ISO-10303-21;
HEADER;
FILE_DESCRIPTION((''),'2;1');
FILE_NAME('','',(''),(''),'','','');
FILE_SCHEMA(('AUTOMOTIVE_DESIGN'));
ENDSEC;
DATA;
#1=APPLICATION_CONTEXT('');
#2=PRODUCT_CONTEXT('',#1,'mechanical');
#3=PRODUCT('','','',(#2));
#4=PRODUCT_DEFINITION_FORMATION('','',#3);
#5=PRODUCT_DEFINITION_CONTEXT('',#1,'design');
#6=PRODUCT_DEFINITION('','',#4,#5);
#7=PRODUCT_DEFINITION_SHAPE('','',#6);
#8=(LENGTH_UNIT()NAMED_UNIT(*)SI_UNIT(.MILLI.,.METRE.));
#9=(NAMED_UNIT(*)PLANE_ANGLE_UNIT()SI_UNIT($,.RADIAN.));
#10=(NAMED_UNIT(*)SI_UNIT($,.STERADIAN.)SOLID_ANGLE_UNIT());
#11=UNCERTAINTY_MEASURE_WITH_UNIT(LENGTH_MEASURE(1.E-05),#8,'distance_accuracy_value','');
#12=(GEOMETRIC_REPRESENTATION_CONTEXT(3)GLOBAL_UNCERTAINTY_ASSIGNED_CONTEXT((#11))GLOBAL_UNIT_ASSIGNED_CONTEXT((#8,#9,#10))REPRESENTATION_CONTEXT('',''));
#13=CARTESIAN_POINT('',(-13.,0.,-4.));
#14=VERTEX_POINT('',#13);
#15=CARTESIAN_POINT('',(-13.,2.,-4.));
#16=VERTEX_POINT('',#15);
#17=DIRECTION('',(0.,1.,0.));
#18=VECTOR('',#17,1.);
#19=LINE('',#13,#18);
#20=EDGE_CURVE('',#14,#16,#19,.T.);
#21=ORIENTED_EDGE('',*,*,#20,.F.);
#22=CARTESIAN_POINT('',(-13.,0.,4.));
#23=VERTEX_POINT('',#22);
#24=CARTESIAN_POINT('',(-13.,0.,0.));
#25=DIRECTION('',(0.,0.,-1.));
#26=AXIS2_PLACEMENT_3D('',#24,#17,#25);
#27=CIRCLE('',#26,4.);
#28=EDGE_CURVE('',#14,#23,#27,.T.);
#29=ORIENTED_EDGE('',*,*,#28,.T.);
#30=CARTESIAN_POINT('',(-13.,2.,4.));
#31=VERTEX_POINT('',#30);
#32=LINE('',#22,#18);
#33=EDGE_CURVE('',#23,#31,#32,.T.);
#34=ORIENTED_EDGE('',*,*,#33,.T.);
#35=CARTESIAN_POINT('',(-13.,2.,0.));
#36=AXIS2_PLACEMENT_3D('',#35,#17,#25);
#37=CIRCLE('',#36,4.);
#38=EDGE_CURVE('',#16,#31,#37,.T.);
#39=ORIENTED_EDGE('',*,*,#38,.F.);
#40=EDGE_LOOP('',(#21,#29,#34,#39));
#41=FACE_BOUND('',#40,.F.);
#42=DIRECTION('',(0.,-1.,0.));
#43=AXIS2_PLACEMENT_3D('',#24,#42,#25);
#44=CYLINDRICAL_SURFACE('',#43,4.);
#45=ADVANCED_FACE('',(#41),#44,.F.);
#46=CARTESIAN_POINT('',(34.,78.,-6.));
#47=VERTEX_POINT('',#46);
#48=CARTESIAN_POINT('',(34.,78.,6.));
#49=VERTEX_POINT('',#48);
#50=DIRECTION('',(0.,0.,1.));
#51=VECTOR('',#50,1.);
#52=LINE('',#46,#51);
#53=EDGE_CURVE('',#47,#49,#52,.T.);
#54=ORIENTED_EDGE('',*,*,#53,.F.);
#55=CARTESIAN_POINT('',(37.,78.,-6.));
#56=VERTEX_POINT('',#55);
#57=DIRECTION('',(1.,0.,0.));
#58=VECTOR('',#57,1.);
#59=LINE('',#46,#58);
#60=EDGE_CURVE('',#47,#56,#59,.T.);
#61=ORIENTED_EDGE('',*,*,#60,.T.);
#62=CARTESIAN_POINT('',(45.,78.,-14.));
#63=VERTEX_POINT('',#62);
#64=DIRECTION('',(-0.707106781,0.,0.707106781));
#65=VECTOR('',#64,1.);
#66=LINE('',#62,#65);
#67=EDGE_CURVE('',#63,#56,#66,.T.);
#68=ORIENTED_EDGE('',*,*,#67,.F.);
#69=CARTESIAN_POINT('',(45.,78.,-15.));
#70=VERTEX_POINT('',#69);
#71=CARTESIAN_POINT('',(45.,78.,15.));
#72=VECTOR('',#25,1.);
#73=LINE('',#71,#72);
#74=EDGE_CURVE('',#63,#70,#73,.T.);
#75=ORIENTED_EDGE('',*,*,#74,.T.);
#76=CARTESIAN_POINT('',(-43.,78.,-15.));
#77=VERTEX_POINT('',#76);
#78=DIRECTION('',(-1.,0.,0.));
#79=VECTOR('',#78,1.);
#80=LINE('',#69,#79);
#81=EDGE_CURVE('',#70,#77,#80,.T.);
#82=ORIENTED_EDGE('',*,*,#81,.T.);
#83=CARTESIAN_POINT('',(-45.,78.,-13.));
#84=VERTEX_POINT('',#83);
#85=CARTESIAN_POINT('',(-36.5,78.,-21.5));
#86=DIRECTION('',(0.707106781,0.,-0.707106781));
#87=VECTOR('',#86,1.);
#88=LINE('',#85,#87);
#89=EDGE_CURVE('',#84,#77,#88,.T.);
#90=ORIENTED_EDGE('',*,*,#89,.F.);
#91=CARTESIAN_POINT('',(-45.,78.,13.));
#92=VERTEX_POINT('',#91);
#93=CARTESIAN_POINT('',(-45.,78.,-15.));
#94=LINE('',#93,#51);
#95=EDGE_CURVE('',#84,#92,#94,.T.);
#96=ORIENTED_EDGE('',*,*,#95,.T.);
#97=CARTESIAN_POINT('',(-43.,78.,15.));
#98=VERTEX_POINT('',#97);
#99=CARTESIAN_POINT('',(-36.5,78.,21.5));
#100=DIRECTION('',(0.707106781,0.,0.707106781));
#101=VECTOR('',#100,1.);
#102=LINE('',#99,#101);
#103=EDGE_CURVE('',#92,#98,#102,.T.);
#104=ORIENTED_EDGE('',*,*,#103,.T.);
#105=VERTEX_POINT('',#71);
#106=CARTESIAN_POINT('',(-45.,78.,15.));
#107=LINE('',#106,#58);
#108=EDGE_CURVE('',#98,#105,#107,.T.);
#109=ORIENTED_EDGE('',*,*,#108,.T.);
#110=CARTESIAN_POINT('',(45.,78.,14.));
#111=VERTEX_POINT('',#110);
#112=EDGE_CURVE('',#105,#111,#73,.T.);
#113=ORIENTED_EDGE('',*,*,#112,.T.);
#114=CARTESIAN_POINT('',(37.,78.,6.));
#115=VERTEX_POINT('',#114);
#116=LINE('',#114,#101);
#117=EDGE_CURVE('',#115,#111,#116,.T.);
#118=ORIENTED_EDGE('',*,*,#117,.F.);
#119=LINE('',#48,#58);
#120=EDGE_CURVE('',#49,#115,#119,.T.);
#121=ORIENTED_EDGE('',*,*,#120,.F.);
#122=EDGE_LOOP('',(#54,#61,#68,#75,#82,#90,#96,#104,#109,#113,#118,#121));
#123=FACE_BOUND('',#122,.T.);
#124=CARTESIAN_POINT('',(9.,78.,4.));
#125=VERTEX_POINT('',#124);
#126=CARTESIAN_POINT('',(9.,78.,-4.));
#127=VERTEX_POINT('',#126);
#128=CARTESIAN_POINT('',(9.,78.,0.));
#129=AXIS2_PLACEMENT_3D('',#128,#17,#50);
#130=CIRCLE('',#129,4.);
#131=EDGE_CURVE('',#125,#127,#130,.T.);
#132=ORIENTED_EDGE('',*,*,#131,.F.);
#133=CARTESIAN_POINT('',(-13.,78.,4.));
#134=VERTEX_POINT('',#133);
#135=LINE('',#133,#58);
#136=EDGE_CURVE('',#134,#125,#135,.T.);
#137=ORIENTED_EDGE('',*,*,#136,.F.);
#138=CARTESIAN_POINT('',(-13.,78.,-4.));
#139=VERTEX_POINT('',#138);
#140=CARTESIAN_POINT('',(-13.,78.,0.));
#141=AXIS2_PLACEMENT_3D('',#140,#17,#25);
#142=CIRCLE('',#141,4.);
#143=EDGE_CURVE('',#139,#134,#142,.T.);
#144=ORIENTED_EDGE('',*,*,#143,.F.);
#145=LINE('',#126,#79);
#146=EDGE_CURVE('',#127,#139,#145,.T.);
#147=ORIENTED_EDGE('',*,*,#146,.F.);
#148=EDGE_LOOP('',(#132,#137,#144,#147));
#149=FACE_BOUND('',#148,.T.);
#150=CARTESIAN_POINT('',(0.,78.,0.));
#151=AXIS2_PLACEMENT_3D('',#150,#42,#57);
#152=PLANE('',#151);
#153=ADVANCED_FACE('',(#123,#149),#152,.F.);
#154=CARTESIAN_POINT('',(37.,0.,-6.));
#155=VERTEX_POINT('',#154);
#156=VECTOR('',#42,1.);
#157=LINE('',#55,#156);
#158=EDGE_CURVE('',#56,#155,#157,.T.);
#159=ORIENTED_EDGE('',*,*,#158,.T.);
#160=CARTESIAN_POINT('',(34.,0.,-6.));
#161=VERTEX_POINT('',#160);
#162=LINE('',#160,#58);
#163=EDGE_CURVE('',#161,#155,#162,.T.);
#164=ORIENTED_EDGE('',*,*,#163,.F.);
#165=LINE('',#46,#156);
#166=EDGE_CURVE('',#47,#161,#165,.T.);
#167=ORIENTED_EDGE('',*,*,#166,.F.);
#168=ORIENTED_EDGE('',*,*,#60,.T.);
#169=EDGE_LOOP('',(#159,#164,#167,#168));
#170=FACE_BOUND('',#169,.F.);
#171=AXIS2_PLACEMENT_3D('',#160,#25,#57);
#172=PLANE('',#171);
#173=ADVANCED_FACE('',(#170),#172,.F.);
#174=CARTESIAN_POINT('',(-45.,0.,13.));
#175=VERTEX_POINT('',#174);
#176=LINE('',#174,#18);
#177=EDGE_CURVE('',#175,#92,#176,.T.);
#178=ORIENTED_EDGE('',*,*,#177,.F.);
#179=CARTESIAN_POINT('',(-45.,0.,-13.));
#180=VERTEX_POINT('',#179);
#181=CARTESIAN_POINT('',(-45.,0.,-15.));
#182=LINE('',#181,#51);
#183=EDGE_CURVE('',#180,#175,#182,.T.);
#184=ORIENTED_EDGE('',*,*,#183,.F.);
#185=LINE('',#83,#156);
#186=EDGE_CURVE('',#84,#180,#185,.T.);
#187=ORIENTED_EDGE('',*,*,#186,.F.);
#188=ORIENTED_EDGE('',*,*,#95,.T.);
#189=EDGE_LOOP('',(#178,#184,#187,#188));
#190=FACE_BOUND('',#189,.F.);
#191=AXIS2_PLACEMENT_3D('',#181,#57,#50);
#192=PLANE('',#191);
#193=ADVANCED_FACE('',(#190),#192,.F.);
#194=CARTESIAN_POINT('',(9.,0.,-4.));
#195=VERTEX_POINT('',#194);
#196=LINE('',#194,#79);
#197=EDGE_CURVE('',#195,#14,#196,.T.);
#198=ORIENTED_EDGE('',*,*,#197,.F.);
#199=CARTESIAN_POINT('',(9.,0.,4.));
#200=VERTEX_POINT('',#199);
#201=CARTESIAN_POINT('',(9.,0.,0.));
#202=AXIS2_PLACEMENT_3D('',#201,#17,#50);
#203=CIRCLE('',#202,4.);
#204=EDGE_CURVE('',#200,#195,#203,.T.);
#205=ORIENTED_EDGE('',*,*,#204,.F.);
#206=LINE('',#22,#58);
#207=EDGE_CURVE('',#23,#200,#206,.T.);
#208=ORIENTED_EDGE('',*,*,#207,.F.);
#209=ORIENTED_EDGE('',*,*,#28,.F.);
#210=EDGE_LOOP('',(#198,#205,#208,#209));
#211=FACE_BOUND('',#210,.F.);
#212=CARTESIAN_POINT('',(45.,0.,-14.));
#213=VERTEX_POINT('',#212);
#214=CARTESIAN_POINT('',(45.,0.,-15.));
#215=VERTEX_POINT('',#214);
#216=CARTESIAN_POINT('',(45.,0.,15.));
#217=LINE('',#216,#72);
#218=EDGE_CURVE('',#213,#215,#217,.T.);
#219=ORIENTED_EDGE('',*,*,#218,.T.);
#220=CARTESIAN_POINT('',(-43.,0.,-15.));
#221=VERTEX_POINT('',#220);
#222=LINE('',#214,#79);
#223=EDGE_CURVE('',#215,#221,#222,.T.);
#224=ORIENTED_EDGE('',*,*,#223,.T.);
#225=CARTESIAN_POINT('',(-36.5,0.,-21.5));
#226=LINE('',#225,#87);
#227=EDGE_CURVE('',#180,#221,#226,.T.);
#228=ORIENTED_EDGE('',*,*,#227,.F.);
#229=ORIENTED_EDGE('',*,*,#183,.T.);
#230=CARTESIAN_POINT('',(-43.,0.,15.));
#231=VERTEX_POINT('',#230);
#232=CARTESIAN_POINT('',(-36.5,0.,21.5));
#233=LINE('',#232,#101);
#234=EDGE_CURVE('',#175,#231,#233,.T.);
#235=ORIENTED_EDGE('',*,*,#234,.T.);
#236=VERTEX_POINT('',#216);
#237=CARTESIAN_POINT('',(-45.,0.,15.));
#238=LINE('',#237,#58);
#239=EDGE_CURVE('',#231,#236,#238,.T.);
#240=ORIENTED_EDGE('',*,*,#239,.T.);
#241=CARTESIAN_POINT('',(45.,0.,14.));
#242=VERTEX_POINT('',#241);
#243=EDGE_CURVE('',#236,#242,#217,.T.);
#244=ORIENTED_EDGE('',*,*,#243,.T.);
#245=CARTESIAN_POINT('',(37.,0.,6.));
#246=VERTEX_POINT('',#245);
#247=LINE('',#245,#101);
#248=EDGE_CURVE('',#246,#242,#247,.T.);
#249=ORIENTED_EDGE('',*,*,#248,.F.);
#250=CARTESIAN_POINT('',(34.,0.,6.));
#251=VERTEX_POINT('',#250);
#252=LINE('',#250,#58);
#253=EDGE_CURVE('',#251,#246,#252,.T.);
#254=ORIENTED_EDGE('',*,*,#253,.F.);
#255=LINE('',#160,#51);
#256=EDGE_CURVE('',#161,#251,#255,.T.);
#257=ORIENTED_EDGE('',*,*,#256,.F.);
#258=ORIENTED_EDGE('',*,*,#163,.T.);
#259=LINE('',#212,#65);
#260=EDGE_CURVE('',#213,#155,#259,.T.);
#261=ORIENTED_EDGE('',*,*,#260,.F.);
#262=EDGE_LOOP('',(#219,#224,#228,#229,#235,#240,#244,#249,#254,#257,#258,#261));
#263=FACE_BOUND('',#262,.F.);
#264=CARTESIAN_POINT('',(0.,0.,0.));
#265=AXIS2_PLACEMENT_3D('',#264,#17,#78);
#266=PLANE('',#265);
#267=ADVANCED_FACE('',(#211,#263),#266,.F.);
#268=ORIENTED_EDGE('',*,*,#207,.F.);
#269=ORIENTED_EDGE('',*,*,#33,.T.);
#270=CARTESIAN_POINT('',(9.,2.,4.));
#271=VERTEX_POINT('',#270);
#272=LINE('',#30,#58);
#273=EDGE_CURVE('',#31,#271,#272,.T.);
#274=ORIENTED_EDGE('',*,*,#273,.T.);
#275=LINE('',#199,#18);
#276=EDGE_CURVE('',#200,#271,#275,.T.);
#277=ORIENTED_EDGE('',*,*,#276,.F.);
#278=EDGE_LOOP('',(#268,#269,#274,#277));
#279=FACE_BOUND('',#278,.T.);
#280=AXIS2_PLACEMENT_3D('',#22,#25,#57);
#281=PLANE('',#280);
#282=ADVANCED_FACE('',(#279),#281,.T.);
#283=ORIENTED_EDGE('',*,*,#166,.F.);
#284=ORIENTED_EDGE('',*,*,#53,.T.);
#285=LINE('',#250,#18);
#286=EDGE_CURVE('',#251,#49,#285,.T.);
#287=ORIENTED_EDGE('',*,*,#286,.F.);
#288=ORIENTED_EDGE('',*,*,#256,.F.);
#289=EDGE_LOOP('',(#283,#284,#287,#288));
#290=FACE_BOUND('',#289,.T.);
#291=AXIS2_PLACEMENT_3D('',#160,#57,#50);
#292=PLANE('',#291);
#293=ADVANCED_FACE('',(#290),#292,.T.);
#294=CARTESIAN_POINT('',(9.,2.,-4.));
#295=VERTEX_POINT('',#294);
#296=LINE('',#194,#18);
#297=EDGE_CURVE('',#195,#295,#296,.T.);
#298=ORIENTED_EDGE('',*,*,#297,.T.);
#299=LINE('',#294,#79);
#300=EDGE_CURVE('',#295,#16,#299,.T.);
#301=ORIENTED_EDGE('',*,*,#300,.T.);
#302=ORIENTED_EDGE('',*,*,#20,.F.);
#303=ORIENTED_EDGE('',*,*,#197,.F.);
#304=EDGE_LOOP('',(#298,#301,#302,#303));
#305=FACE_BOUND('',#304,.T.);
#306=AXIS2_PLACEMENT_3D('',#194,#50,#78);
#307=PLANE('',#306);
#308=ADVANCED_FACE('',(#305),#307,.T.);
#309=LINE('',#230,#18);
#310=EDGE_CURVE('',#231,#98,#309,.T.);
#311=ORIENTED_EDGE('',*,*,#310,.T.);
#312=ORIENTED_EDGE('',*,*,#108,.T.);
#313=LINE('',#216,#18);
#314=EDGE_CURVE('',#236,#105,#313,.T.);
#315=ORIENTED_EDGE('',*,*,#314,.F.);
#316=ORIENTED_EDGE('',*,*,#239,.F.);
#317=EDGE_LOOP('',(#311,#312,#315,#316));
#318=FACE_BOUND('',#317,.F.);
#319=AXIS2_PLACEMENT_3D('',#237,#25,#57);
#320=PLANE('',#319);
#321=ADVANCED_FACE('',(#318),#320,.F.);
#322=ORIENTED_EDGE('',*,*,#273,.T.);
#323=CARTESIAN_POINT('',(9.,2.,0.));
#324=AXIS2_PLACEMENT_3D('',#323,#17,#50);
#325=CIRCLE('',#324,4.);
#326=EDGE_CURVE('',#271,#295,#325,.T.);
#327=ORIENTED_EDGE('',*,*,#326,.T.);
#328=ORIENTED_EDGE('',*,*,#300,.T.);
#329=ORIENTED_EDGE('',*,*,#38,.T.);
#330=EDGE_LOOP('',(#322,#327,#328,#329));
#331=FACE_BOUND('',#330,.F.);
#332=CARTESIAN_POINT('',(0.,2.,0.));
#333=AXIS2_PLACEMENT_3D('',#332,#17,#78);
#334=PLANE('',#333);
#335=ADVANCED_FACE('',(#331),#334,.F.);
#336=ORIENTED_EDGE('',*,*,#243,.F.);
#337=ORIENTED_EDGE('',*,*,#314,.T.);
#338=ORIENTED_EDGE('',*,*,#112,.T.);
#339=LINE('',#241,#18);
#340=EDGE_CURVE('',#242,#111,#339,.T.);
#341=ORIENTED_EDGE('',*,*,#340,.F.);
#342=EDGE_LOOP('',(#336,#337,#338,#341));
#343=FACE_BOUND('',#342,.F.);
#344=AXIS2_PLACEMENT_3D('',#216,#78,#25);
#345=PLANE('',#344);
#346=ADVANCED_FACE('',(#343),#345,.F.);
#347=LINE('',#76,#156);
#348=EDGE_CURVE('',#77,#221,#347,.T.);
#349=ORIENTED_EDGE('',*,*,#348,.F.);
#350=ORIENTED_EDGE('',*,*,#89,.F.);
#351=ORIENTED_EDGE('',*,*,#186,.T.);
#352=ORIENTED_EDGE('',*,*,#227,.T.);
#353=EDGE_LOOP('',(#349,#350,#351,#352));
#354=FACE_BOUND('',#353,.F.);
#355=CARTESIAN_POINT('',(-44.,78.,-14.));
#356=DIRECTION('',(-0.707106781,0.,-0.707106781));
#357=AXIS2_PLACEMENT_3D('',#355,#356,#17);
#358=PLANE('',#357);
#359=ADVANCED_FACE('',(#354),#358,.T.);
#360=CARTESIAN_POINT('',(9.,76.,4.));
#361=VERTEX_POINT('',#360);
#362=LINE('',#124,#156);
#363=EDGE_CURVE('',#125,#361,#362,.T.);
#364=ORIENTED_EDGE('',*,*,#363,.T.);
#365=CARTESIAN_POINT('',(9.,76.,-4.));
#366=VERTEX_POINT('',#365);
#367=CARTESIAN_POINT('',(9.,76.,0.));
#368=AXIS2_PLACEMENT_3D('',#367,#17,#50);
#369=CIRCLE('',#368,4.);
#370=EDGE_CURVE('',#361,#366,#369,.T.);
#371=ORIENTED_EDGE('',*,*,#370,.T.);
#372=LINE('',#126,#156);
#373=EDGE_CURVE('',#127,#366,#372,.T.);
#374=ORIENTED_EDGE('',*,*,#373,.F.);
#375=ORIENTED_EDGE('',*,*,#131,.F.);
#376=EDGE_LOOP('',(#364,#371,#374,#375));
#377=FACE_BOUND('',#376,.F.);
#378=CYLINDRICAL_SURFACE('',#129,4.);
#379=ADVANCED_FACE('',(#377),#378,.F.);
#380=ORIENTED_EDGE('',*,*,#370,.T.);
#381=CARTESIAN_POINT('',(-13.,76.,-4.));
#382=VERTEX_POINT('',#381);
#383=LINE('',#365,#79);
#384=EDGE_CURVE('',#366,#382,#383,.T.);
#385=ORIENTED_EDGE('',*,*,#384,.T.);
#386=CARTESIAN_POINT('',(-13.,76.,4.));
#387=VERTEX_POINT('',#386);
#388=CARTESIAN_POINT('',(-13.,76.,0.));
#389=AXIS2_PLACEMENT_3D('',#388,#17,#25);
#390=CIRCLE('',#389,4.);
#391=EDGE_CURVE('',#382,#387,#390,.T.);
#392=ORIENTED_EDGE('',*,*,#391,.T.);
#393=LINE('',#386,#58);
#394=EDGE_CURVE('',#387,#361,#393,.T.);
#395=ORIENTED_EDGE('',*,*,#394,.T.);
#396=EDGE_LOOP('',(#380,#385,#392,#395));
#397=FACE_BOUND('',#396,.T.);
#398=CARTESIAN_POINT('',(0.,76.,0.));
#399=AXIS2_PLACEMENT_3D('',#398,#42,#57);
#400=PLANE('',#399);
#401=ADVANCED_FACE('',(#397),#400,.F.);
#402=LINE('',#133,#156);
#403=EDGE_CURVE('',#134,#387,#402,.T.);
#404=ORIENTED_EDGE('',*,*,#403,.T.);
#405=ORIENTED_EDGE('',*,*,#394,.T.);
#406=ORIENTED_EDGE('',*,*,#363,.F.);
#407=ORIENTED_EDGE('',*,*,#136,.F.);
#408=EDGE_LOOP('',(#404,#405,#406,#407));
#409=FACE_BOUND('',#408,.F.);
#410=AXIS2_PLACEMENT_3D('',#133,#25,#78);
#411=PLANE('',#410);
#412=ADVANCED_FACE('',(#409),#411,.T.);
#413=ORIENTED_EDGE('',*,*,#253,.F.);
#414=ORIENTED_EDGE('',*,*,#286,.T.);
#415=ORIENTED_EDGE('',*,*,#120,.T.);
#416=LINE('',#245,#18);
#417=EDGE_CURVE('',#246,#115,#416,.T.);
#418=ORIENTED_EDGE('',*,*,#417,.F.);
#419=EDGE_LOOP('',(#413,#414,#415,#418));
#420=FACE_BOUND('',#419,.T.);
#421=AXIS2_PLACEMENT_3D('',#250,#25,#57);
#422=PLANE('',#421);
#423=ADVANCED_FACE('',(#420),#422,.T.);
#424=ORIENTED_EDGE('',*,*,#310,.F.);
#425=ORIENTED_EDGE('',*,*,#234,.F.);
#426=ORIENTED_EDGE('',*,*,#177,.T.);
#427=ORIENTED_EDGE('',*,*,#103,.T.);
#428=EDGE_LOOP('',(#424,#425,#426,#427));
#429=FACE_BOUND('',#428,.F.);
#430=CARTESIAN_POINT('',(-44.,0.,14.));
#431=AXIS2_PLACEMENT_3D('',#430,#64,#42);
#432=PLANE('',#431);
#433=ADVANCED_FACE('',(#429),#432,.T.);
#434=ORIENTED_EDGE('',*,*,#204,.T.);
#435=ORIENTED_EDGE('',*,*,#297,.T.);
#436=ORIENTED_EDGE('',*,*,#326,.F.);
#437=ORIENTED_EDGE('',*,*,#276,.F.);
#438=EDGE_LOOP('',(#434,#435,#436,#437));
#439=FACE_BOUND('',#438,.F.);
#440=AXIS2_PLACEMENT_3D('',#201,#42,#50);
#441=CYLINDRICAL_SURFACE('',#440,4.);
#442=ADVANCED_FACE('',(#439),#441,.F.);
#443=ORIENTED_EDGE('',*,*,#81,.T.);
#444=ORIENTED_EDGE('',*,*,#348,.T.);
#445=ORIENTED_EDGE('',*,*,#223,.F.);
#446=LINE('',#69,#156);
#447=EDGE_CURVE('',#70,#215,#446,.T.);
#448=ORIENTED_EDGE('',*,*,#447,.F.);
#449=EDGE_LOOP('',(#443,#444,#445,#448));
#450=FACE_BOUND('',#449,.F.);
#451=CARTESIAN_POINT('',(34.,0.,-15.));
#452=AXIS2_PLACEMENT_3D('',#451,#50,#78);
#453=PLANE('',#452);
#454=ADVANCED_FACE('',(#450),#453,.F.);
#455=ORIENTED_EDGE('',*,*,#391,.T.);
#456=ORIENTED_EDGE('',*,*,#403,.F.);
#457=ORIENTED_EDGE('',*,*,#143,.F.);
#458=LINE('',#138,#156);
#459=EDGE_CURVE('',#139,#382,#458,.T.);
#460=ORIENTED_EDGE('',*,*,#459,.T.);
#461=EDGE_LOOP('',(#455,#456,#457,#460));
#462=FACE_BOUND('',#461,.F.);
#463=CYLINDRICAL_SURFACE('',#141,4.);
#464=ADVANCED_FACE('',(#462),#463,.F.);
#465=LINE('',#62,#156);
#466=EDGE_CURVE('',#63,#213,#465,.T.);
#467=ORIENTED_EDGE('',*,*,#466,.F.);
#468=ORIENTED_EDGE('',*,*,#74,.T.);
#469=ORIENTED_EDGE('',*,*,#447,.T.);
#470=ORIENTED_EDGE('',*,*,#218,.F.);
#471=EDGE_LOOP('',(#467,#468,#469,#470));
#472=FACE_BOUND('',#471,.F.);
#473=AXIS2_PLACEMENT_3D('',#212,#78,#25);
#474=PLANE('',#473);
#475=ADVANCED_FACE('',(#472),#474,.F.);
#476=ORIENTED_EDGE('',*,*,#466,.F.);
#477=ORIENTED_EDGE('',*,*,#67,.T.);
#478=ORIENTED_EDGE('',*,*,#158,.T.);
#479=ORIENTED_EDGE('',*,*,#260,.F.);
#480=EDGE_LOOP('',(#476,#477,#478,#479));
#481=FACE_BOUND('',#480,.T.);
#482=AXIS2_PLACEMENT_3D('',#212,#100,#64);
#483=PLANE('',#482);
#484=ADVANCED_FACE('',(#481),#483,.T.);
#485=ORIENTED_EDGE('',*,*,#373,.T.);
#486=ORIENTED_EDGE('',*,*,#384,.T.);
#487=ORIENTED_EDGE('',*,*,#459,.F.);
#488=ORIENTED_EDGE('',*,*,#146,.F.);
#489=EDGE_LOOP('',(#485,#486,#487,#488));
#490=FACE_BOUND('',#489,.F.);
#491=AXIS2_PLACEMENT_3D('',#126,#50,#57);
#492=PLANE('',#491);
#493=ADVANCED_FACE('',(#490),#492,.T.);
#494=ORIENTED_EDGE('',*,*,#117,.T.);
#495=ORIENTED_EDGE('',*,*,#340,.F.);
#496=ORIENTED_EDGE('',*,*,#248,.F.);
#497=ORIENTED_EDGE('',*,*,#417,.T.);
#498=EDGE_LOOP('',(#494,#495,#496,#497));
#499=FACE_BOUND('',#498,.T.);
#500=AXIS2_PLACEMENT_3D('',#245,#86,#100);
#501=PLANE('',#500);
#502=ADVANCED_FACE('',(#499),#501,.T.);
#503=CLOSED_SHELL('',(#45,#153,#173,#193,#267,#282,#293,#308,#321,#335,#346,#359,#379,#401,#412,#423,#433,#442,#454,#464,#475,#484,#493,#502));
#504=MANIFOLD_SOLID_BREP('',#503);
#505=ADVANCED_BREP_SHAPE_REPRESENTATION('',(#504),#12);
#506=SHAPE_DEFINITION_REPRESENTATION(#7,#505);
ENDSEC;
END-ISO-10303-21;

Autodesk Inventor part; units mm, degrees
ref_plane "YZ Plane" through (0, 0, 0) normal (1, 0, 0) x (0, 1, 0)
ref_plane "XZ Plane" through (0, 0, 0) normal (0, 1, 0) x (-1, 0, 0)
ref_plane "XY Plane" through (0, 0, 0) normal (0, 0, 1) x (1, 0, 0)
sketch "Эскиз1" plane through (0, 0, 0) normal (0, 1, 0) x (-1, 0, 0)
  line L0 (45, 15) -> (-45, 15)
  line L1 (-45, 15) -> (-45, -15)
  line L2 (-45, -15) -> (45, -15)
  line L3 (45, -15) -> (45, 15)
  line L4 (45, 15) -> (-45, -15) construction
  line L5 (-45, 15) -> (45, -15) construction
  line L6 (-45, 15) -> (-9, 15)
  line L7 (-9, 15) -> (-9, 0)
  line L8 (-9, 0) -> (13, 0)
  line L9 (13, 0) -> (-9, 0) construction
  line L10 (-45, -15) -> (-34, -15)
  line L11 (-34, -15) -> (-34, 0)
  line L12 (-34, 0) -> (-34, -6)
  line L13 (-45, -15) -> (-45, -14)
  line L14 (-45, 15) -> (-45, 14)
  line L15 (-45, -14) -> (-28.0294, -14) construction
  line L16 (-34, -6) -> (-37, -6)
  line L17 (-34, 0) -> (-34, 6)
  line L18 (-34, 6) -> (-37, 6)
  line L19 (-37, 6) -> (-45, 14)
  line L20 (-45, -14) -> (-37, -6)
  line L21 (-45, 0) -> (-51.506, 0)
  circle A0 centre (-51, 0) radius 14.1421
  line L22 (-9, 0) -> (13, 0) construction
  line L23 (-9, -4) -> (13, -4)
  line L24 (13, 4) -> (-9, 4)
  arc A1 (-9, 4) -> (-9, -4) centre (-9, 0) ccw
  arc A2 (13, -4) -> (13, 4) centre (13, 0) ccw
  point P0 (0, 0)
  point P1 (2, 0)
  point P2 (2, 0)
  dimension "d0" = 90
  dimension "d1" = 30
  dimension "d2" = 36
  dimension "d3" = 22
  dimension "d7" = 11
  dimension "d8" = 6
  dimension "d9" = 1
  dimension "d10" = 1
  dimension "d12" = 6
  dimension "d13" = 3
  dimension "d14" = 6.506
  dimension "d17" = 8
extrude "Выдавливание1" add sketch "Эскиз1" along normal blind 39 contours L3 L2 L11 L17 L18 L19 L1 L0 | L2 L1 L20 L16 L11 | A1 L24 A2 L23
extrude "Выдавливание2" cut sketch "Эскиз1" along normal blind 2 contours A1 L24 A2 L23
mirror "Зеркальное отражение1" about plane through (0, 39, 0) normal (0, 1, 0) of "Выдавливание2", "Выдавливание1"
chamfer "Фаска1" distance 2 angle 45 2 edges at (-45, 39, -15) (-45, 39, 15)
properties part number "Призма-5"
